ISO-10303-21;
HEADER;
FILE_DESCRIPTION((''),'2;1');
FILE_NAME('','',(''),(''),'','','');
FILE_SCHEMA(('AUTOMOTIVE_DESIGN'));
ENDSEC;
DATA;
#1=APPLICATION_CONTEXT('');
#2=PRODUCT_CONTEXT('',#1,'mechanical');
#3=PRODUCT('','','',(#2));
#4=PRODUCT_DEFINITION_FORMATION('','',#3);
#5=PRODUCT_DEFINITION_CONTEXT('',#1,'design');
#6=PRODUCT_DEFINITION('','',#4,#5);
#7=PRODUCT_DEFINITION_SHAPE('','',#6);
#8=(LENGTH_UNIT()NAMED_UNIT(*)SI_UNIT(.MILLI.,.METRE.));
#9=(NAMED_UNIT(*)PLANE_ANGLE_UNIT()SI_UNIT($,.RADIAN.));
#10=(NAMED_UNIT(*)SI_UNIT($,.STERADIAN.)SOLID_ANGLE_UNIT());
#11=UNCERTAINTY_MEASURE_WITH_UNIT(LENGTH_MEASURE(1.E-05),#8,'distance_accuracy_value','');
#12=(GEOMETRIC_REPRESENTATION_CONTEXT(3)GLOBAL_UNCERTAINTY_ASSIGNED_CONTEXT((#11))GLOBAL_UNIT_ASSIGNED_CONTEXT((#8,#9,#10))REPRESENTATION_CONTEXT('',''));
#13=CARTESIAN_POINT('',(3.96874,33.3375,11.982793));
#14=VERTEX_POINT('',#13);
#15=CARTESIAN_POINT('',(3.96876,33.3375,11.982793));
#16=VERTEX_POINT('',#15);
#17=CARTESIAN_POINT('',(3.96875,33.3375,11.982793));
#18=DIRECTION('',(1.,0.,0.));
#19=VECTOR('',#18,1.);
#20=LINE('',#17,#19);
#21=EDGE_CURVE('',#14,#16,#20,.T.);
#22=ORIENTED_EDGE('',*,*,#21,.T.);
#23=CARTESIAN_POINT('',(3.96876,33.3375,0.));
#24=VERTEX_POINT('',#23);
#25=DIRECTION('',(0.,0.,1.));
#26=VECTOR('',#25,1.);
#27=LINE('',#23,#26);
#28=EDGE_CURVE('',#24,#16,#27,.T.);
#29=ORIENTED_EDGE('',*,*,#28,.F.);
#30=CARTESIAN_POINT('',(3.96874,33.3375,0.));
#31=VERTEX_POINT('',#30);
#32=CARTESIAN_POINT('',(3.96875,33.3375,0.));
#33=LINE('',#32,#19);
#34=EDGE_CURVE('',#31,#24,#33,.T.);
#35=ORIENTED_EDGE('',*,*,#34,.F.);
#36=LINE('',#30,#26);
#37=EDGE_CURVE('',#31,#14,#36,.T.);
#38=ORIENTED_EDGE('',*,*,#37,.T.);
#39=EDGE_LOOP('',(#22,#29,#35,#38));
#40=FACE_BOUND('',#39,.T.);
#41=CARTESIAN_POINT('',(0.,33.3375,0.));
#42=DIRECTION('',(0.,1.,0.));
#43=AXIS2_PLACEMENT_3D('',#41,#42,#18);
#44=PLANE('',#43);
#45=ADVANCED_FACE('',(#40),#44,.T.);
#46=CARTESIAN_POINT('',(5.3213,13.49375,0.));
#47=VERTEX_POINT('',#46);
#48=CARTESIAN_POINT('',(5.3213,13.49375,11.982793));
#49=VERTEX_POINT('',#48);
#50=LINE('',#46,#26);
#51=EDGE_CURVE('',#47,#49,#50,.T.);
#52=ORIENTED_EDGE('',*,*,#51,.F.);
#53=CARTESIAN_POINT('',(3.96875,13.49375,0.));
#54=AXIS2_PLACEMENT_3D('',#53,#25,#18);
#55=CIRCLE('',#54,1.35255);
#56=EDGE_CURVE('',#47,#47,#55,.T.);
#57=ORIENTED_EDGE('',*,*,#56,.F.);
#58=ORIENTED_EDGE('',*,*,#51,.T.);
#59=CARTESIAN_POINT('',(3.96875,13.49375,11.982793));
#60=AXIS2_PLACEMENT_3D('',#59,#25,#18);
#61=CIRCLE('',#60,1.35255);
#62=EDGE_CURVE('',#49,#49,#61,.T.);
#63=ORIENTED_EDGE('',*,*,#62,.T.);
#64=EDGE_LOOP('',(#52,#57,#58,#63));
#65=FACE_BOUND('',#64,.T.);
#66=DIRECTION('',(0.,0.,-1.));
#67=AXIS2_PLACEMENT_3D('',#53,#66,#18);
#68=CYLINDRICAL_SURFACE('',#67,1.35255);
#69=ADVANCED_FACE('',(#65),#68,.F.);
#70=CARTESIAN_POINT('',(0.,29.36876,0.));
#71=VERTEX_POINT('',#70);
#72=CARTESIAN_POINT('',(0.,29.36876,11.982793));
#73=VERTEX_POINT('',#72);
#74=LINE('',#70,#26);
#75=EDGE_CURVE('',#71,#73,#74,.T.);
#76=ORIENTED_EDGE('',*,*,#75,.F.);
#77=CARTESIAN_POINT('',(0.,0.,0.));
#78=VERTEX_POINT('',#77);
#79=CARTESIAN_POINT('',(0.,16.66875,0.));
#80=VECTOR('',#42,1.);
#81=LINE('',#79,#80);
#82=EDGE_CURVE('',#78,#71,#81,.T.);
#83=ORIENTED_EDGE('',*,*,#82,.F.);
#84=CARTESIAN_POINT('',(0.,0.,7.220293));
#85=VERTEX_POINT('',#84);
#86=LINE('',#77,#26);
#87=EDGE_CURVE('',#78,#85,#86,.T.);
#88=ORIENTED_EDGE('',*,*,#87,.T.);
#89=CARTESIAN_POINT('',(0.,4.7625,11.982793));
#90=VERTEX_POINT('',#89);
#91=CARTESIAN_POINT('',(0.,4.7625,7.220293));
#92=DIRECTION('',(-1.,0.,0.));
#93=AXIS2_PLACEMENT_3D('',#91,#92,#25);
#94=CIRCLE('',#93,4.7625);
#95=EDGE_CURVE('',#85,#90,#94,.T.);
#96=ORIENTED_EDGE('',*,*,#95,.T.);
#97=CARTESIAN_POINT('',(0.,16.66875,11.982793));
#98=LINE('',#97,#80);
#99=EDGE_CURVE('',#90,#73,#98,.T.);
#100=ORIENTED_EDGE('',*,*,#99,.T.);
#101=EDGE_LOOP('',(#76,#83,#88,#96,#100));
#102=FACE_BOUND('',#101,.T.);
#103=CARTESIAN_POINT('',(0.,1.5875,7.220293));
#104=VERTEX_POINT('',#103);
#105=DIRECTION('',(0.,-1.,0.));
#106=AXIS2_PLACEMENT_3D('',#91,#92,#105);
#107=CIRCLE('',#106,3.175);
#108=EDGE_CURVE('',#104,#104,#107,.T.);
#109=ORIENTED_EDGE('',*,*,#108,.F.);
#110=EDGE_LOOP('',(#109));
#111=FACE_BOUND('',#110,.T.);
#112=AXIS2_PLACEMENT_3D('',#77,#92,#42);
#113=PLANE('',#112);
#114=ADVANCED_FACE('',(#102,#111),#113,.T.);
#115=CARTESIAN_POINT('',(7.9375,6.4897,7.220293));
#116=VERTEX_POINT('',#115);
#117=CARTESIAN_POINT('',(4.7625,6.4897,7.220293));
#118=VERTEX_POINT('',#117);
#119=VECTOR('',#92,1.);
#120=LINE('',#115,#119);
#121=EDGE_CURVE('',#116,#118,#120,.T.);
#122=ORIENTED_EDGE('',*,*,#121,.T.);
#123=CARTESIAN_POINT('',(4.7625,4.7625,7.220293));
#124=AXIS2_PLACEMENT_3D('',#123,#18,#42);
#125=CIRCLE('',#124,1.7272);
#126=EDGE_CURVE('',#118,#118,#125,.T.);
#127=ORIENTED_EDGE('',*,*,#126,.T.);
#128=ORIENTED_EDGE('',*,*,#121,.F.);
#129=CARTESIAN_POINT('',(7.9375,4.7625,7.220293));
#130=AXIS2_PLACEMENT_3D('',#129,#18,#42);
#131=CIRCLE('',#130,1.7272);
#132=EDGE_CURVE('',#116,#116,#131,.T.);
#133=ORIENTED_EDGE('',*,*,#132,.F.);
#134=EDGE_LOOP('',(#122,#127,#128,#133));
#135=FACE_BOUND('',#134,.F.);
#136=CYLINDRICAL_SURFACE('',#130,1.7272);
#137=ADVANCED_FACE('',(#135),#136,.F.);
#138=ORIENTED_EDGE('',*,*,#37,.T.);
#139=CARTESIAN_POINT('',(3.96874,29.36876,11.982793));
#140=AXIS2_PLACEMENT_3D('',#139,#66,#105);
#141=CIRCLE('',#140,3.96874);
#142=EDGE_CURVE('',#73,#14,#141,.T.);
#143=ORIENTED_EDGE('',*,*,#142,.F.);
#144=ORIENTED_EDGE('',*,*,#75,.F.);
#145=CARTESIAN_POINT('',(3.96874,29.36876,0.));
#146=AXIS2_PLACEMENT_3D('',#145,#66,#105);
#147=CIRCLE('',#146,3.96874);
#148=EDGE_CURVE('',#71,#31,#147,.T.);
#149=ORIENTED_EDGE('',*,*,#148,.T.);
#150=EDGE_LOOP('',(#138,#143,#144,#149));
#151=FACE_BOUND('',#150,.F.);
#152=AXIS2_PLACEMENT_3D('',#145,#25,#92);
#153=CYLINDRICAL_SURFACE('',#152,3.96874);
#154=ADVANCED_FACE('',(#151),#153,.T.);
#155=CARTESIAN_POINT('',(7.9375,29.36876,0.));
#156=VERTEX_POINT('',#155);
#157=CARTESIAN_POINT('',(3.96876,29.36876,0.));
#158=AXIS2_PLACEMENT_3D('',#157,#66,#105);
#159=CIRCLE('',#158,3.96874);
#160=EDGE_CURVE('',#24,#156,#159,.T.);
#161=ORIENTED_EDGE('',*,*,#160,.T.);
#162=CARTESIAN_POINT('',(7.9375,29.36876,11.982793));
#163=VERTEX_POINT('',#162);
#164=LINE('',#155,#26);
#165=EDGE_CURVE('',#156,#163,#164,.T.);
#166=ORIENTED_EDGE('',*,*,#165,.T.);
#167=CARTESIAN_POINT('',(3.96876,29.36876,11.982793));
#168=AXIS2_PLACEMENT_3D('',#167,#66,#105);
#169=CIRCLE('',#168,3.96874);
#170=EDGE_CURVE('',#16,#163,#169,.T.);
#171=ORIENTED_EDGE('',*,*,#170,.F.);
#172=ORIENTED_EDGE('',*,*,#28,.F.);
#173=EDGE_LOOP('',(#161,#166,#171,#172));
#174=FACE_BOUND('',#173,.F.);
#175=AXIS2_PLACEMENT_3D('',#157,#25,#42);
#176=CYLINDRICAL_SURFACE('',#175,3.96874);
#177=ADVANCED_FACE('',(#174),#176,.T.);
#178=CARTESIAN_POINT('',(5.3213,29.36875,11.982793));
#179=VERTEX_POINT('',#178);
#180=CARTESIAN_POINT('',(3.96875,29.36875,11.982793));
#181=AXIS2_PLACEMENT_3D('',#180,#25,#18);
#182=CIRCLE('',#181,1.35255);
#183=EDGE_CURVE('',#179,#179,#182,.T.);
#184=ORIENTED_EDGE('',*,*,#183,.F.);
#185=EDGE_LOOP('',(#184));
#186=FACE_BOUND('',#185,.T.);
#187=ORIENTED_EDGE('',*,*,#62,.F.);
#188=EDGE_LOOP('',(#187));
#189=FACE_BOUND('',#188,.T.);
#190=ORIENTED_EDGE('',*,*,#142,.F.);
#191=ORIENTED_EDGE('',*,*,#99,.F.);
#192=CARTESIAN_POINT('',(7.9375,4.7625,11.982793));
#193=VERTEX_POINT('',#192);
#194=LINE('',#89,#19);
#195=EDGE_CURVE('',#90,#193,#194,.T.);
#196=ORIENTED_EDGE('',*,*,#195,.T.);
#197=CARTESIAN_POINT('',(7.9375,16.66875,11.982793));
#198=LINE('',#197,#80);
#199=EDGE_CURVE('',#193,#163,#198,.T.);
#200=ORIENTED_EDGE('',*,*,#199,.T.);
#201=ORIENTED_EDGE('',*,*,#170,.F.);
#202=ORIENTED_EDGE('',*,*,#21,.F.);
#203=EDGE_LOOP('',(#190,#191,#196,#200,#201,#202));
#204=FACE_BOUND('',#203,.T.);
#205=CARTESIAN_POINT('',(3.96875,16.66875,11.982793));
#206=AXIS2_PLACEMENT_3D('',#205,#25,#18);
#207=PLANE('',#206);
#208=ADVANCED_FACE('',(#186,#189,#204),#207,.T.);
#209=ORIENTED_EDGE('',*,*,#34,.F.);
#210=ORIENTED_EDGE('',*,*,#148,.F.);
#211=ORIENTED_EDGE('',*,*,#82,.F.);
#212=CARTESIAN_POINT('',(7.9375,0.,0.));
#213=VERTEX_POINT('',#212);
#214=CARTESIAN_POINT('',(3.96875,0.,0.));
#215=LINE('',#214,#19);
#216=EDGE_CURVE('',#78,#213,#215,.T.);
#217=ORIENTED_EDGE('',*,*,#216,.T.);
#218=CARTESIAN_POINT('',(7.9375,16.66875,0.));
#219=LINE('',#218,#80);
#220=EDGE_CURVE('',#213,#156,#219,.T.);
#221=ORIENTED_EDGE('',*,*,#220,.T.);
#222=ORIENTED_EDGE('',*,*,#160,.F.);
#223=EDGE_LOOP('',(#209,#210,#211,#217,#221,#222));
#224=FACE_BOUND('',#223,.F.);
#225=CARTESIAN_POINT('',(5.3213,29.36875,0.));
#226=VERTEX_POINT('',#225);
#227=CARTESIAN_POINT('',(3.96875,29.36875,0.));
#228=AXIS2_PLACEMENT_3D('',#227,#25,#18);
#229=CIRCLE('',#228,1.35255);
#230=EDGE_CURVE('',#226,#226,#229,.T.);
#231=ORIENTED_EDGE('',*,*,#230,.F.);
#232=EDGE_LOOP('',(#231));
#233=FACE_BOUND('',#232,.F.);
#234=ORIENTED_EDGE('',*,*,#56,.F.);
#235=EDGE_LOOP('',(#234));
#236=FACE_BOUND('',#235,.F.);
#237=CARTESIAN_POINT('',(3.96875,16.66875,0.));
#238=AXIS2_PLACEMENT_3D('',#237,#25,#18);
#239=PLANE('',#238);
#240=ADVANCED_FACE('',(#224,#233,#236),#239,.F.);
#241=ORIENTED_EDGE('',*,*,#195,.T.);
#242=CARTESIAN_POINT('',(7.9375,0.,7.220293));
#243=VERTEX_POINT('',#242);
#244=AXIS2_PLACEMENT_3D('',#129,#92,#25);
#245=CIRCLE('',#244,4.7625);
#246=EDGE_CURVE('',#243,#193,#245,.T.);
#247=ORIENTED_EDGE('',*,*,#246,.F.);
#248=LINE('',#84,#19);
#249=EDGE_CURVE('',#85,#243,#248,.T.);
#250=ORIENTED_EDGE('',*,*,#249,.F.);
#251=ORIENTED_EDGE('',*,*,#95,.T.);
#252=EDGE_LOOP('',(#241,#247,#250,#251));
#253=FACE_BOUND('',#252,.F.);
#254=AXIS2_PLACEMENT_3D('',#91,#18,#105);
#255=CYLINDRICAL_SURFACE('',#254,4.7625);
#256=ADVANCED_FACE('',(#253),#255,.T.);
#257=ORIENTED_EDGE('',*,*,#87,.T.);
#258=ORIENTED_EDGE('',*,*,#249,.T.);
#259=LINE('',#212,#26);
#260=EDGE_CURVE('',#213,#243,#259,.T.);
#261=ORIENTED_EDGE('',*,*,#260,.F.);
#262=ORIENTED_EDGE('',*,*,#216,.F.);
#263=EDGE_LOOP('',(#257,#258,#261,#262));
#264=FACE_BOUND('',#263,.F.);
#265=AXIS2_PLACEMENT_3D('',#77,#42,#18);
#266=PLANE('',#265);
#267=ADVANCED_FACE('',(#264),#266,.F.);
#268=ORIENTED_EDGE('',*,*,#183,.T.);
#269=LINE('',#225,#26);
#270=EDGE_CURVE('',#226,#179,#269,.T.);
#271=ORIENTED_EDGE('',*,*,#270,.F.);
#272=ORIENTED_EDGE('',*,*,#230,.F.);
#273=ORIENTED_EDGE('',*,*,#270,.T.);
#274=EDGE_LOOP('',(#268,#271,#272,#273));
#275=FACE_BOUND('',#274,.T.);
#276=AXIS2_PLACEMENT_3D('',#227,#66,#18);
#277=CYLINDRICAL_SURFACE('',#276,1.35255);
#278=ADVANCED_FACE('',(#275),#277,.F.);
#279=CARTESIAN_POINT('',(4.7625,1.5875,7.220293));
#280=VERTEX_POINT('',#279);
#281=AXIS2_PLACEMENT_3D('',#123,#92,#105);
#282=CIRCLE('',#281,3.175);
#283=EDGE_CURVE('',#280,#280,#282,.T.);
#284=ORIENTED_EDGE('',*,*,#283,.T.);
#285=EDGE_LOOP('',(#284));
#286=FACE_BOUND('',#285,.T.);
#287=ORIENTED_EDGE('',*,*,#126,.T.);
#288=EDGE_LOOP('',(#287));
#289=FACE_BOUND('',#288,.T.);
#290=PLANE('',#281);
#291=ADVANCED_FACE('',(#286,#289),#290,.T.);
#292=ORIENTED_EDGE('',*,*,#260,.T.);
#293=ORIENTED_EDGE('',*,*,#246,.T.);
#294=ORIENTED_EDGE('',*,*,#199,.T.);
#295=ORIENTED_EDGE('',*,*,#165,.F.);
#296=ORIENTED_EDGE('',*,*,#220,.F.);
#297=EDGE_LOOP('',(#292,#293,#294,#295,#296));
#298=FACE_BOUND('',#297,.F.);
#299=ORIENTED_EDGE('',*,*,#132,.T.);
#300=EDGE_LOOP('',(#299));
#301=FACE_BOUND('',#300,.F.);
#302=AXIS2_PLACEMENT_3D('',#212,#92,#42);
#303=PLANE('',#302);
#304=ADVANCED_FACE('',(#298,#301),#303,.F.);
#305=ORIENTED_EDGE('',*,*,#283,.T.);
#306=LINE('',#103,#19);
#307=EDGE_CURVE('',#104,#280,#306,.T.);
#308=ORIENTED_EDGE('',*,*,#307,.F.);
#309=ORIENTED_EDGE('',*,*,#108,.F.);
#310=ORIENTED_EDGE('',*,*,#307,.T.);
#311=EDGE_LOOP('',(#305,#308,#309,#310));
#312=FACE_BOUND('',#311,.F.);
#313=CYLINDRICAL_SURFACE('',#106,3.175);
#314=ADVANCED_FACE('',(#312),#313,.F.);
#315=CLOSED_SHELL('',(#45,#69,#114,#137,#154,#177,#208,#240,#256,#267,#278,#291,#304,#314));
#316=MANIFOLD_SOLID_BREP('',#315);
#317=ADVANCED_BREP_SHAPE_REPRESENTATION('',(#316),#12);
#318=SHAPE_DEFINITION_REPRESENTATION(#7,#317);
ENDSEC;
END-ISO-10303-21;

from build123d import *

# Parameters (mm, degrees)
F0_W     = 7.9375
F0_H     = 33.3375
F0_R     = 1.35255
F1_DEPTH = 11.9827929
F2_R     = 3.96874
F3_R     = 4.7625
F4_R     = 1.7272
F5_DEPTH = 7.9375
F6_R     = 3.175
F6_R_2   = 1.7272
F8_DEPTH = 4.7625


# Not quite as in the source:
# - a fillet or chamfer is up to 0.001 mm smaller than in the source, because OpenCascade refuses the exact size


with BuildPart() as f1:
    # F0 (on Top) → F1 (new body)
    with BuildSketch(Plane.XY):
        with Locations((3.96875, 16.66875)):
            Rectangle(F0_W, F0_H)
        with Locations((3.96875, 13.49375)):
            Circle(F0_R, mode=Mode.SUBTRACT)
        with Locations((3.96875, 29.36875)):
            Circle(F0_R, mode=Mode.SUBTRACT)
    extrude(amount=F1_DEPTH)

    # F2 (radius 3.96875 in the source; OpenCascade refuses exactly that, so slightly less here)
    f2_edges = [f1.edges().sort_by_distance(p)[0] for p in [
        (7.9375, 33.3375, 5.991396),
        (0, 33.3375, 5.991396),
    ]]
    fillet(f2_edges, radius=F2_R)

    # F3
    f3_edges = [f1.edges().sort_by_distance(p)[0] for p in [
        (3.96875, 0, 11.982793),
    ]]
    fillet(f3_edges, radius=F3_R)

    # F4 (on face) → F5 (cut, through all)
    with BuildSketch(Plane.YZ.offset(7.9375)):
        with Locations((4.7625, 7.2202929)):
            Circle(F4_R)
    extrude(amount=-F5_DEPTH, mode=Mode.SUBTRACT)

    # F6 (on face) → F8 (cut, through all)
    with BuildSketch(Plane(origin=(0, 0, 0), x_dir=(0, -1, 0), z_dir=(-1, 0, 0))):
        with Locations((-4.7625, 7.2202929)):
            Circle(F6_R)
        with Locations((-4.7625, 7.2202929)):
            Circle(F6_R_2, mode=Mode.SUBTRACT)
    extrude(amount=-F8_DEPTH, mode=Mode.SUBTRACT)


solid = f1.part
